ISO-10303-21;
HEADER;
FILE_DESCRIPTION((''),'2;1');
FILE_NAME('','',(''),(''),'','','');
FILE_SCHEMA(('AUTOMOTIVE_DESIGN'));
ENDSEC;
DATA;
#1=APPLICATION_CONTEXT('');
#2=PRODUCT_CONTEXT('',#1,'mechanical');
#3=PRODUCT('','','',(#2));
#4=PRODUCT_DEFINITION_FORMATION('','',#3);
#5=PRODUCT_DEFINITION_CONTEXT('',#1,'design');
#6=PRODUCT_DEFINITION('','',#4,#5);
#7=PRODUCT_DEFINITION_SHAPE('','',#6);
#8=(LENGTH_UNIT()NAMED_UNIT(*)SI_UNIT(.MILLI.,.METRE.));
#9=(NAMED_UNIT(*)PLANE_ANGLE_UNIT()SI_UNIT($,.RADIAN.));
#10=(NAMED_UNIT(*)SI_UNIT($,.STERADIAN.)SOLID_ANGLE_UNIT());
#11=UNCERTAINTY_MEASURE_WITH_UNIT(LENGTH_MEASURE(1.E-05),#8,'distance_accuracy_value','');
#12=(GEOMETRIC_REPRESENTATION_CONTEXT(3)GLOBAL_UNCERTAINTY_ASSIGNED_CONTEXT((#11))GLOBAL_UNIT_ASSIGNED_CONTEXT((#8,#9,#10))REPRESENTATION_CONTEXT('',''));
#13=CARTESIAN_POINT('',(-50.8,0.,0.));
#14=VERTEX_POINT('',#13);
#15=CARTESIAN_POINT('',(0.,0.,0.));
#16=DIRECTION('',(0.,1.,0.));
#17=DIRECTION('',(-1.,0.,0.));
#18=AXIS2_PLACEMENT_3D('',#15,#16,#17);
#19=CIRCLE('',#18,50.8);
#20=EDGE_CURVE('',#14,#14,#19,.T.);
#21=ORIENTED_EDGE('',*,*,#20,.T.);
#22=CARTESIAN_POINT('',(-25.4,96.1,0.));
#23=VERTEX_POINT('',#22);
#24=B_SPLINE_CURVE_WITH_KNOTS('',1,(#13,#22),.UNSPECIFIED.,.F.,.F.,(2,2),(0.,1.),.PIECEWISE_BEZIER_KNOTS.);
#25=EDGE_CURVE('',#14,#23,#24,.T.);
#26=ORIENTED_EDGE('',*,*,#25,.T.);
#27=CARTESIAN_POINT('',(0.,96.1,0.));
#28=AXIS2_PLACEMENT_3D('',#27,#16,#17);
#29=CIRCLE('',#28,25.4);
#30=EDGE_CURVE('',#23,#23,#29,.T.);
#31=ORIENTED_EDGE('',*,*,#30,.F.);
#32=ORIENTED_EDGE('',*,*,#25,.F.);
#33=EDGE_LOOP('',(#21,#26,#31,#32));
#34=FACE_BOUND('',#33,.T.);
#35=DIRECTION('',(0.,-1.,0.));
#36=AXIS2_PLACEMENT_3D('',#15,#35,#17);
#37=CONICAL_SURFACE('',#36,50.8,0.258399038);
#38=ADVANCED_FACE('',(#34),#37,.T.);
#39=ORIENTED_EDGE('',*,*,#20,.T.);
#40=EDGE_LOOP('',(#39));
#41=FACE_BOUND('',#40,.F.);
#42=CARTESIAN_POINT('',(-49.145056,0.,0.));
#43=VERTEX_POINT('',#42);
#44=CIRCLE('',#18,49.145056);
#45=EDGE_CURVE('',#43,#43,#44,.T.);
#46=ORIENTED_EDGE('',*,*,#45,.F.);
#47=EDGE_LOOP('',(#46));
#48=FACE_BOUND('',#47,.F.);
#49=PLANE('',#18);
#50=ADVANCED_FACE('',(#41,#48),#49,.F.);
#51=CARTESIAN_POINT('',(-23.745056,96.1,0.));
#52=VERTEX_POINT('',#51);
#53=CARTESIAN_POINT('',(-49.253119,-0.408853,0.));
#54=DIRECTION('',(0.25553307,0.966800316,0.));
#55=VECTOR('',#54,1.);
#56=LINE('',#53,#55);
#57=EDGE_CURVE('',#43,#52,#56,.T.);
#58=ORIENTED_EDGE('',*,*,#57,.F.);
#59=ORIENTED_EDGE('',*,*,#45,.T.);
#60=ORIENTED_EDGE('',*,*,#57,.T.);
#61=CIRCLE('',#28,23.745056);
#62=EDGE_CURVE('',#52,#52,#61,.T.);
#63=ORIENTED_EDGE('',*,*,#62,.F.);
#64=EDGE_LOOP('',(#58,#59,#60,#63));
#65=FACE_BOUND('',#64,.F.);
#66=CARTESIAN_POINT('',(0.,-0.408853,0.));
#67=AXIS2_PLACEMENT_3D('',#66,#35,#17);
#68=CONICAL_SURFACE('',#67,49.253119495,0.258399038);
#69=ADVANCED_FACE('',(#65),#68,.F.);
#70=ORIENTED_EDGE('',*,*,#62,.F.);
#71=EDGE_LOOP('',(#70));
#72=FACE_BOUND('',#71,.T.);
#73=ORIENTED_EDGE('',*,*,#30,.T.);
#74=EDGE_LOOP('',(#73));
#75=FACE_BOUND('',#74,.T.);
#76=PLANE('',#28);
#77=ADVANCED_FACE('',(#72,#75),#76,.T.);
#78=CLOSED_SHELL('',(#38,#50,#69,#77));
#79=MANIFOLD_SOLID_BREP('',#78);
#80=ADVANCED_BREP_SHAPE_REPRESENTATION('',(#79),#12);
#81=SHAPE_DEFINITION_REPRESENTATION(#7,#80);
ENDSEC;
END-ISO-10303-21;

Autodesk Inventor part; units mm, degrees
ref_plane "YZ Plane" through (0, 0, 0) normal (1, 0, 0) x (0, 1, 0)
ref_plane "XY Plane" through (0, 0, 0) normal (0, 0, 1) x (1, 0, 0)
sketch "Szkic6" plane through (0, 0, 0) normal (0, 1, 0) x (-1, 0, 0)
  circle A0 centre (0, 0) radius 50.8
  dimension "d33" = 101.6
ref_plane "Płaszczyzna konstrukcyjna1" through (0, 96.1, 0) normal (0, 1, 0) x (-1, 0, 0)
sketch "Szkic7" plane through (0, 96.1, 0) normal (0, 1, 0) x (-1, 0, 0)
  circle A0 centre (0, 0) radius 25.4
  dimension "d35" = 50.8
loft "Wyciągnięcie złożone1" add profiles "Szkic6", "Szkic7"
shell "Skorupa1" thickness 1.6 removed faces 2 at (7.2508, 96.1, -1.9085) at (7.3018, 0, 11.5135)
equation "\"d33\" = OD1"
equation "\"d35\" = OD2"
equation "\"d52\" = THK"
equation "\"SzerokośćGięciaPodcięcia\" = Grubość"
equation "\"RozmiarPodcięciaNarożnika\" = 4 * Grubość"
equation "\"PromieńPrzejścia\" = PromieńGięcia"
equation "\"Rozmiar_promienia_Jacobiego\" = PromieńGięcia"
equation "\"Wielk_odstępu\" = Grubość"
equation "\"d2\" = PromieńGięcia"
equation "\"d23\" = PromieńGięcia"
equation "\"OD1\" = 101.6"
equation "\"OD2\" = 50.8"
equation "\"L\" = 96.1"
equation "\"THK\" = 1.6"
equation "\"d34\" = L"
equation "\"Grubość\" = 1.5"
equation "\"PromieńGięcia\" = 3"
properties part number "Redukcja symetryczna Ø101,6x50,8x1,6 L=96,1" material "304"
